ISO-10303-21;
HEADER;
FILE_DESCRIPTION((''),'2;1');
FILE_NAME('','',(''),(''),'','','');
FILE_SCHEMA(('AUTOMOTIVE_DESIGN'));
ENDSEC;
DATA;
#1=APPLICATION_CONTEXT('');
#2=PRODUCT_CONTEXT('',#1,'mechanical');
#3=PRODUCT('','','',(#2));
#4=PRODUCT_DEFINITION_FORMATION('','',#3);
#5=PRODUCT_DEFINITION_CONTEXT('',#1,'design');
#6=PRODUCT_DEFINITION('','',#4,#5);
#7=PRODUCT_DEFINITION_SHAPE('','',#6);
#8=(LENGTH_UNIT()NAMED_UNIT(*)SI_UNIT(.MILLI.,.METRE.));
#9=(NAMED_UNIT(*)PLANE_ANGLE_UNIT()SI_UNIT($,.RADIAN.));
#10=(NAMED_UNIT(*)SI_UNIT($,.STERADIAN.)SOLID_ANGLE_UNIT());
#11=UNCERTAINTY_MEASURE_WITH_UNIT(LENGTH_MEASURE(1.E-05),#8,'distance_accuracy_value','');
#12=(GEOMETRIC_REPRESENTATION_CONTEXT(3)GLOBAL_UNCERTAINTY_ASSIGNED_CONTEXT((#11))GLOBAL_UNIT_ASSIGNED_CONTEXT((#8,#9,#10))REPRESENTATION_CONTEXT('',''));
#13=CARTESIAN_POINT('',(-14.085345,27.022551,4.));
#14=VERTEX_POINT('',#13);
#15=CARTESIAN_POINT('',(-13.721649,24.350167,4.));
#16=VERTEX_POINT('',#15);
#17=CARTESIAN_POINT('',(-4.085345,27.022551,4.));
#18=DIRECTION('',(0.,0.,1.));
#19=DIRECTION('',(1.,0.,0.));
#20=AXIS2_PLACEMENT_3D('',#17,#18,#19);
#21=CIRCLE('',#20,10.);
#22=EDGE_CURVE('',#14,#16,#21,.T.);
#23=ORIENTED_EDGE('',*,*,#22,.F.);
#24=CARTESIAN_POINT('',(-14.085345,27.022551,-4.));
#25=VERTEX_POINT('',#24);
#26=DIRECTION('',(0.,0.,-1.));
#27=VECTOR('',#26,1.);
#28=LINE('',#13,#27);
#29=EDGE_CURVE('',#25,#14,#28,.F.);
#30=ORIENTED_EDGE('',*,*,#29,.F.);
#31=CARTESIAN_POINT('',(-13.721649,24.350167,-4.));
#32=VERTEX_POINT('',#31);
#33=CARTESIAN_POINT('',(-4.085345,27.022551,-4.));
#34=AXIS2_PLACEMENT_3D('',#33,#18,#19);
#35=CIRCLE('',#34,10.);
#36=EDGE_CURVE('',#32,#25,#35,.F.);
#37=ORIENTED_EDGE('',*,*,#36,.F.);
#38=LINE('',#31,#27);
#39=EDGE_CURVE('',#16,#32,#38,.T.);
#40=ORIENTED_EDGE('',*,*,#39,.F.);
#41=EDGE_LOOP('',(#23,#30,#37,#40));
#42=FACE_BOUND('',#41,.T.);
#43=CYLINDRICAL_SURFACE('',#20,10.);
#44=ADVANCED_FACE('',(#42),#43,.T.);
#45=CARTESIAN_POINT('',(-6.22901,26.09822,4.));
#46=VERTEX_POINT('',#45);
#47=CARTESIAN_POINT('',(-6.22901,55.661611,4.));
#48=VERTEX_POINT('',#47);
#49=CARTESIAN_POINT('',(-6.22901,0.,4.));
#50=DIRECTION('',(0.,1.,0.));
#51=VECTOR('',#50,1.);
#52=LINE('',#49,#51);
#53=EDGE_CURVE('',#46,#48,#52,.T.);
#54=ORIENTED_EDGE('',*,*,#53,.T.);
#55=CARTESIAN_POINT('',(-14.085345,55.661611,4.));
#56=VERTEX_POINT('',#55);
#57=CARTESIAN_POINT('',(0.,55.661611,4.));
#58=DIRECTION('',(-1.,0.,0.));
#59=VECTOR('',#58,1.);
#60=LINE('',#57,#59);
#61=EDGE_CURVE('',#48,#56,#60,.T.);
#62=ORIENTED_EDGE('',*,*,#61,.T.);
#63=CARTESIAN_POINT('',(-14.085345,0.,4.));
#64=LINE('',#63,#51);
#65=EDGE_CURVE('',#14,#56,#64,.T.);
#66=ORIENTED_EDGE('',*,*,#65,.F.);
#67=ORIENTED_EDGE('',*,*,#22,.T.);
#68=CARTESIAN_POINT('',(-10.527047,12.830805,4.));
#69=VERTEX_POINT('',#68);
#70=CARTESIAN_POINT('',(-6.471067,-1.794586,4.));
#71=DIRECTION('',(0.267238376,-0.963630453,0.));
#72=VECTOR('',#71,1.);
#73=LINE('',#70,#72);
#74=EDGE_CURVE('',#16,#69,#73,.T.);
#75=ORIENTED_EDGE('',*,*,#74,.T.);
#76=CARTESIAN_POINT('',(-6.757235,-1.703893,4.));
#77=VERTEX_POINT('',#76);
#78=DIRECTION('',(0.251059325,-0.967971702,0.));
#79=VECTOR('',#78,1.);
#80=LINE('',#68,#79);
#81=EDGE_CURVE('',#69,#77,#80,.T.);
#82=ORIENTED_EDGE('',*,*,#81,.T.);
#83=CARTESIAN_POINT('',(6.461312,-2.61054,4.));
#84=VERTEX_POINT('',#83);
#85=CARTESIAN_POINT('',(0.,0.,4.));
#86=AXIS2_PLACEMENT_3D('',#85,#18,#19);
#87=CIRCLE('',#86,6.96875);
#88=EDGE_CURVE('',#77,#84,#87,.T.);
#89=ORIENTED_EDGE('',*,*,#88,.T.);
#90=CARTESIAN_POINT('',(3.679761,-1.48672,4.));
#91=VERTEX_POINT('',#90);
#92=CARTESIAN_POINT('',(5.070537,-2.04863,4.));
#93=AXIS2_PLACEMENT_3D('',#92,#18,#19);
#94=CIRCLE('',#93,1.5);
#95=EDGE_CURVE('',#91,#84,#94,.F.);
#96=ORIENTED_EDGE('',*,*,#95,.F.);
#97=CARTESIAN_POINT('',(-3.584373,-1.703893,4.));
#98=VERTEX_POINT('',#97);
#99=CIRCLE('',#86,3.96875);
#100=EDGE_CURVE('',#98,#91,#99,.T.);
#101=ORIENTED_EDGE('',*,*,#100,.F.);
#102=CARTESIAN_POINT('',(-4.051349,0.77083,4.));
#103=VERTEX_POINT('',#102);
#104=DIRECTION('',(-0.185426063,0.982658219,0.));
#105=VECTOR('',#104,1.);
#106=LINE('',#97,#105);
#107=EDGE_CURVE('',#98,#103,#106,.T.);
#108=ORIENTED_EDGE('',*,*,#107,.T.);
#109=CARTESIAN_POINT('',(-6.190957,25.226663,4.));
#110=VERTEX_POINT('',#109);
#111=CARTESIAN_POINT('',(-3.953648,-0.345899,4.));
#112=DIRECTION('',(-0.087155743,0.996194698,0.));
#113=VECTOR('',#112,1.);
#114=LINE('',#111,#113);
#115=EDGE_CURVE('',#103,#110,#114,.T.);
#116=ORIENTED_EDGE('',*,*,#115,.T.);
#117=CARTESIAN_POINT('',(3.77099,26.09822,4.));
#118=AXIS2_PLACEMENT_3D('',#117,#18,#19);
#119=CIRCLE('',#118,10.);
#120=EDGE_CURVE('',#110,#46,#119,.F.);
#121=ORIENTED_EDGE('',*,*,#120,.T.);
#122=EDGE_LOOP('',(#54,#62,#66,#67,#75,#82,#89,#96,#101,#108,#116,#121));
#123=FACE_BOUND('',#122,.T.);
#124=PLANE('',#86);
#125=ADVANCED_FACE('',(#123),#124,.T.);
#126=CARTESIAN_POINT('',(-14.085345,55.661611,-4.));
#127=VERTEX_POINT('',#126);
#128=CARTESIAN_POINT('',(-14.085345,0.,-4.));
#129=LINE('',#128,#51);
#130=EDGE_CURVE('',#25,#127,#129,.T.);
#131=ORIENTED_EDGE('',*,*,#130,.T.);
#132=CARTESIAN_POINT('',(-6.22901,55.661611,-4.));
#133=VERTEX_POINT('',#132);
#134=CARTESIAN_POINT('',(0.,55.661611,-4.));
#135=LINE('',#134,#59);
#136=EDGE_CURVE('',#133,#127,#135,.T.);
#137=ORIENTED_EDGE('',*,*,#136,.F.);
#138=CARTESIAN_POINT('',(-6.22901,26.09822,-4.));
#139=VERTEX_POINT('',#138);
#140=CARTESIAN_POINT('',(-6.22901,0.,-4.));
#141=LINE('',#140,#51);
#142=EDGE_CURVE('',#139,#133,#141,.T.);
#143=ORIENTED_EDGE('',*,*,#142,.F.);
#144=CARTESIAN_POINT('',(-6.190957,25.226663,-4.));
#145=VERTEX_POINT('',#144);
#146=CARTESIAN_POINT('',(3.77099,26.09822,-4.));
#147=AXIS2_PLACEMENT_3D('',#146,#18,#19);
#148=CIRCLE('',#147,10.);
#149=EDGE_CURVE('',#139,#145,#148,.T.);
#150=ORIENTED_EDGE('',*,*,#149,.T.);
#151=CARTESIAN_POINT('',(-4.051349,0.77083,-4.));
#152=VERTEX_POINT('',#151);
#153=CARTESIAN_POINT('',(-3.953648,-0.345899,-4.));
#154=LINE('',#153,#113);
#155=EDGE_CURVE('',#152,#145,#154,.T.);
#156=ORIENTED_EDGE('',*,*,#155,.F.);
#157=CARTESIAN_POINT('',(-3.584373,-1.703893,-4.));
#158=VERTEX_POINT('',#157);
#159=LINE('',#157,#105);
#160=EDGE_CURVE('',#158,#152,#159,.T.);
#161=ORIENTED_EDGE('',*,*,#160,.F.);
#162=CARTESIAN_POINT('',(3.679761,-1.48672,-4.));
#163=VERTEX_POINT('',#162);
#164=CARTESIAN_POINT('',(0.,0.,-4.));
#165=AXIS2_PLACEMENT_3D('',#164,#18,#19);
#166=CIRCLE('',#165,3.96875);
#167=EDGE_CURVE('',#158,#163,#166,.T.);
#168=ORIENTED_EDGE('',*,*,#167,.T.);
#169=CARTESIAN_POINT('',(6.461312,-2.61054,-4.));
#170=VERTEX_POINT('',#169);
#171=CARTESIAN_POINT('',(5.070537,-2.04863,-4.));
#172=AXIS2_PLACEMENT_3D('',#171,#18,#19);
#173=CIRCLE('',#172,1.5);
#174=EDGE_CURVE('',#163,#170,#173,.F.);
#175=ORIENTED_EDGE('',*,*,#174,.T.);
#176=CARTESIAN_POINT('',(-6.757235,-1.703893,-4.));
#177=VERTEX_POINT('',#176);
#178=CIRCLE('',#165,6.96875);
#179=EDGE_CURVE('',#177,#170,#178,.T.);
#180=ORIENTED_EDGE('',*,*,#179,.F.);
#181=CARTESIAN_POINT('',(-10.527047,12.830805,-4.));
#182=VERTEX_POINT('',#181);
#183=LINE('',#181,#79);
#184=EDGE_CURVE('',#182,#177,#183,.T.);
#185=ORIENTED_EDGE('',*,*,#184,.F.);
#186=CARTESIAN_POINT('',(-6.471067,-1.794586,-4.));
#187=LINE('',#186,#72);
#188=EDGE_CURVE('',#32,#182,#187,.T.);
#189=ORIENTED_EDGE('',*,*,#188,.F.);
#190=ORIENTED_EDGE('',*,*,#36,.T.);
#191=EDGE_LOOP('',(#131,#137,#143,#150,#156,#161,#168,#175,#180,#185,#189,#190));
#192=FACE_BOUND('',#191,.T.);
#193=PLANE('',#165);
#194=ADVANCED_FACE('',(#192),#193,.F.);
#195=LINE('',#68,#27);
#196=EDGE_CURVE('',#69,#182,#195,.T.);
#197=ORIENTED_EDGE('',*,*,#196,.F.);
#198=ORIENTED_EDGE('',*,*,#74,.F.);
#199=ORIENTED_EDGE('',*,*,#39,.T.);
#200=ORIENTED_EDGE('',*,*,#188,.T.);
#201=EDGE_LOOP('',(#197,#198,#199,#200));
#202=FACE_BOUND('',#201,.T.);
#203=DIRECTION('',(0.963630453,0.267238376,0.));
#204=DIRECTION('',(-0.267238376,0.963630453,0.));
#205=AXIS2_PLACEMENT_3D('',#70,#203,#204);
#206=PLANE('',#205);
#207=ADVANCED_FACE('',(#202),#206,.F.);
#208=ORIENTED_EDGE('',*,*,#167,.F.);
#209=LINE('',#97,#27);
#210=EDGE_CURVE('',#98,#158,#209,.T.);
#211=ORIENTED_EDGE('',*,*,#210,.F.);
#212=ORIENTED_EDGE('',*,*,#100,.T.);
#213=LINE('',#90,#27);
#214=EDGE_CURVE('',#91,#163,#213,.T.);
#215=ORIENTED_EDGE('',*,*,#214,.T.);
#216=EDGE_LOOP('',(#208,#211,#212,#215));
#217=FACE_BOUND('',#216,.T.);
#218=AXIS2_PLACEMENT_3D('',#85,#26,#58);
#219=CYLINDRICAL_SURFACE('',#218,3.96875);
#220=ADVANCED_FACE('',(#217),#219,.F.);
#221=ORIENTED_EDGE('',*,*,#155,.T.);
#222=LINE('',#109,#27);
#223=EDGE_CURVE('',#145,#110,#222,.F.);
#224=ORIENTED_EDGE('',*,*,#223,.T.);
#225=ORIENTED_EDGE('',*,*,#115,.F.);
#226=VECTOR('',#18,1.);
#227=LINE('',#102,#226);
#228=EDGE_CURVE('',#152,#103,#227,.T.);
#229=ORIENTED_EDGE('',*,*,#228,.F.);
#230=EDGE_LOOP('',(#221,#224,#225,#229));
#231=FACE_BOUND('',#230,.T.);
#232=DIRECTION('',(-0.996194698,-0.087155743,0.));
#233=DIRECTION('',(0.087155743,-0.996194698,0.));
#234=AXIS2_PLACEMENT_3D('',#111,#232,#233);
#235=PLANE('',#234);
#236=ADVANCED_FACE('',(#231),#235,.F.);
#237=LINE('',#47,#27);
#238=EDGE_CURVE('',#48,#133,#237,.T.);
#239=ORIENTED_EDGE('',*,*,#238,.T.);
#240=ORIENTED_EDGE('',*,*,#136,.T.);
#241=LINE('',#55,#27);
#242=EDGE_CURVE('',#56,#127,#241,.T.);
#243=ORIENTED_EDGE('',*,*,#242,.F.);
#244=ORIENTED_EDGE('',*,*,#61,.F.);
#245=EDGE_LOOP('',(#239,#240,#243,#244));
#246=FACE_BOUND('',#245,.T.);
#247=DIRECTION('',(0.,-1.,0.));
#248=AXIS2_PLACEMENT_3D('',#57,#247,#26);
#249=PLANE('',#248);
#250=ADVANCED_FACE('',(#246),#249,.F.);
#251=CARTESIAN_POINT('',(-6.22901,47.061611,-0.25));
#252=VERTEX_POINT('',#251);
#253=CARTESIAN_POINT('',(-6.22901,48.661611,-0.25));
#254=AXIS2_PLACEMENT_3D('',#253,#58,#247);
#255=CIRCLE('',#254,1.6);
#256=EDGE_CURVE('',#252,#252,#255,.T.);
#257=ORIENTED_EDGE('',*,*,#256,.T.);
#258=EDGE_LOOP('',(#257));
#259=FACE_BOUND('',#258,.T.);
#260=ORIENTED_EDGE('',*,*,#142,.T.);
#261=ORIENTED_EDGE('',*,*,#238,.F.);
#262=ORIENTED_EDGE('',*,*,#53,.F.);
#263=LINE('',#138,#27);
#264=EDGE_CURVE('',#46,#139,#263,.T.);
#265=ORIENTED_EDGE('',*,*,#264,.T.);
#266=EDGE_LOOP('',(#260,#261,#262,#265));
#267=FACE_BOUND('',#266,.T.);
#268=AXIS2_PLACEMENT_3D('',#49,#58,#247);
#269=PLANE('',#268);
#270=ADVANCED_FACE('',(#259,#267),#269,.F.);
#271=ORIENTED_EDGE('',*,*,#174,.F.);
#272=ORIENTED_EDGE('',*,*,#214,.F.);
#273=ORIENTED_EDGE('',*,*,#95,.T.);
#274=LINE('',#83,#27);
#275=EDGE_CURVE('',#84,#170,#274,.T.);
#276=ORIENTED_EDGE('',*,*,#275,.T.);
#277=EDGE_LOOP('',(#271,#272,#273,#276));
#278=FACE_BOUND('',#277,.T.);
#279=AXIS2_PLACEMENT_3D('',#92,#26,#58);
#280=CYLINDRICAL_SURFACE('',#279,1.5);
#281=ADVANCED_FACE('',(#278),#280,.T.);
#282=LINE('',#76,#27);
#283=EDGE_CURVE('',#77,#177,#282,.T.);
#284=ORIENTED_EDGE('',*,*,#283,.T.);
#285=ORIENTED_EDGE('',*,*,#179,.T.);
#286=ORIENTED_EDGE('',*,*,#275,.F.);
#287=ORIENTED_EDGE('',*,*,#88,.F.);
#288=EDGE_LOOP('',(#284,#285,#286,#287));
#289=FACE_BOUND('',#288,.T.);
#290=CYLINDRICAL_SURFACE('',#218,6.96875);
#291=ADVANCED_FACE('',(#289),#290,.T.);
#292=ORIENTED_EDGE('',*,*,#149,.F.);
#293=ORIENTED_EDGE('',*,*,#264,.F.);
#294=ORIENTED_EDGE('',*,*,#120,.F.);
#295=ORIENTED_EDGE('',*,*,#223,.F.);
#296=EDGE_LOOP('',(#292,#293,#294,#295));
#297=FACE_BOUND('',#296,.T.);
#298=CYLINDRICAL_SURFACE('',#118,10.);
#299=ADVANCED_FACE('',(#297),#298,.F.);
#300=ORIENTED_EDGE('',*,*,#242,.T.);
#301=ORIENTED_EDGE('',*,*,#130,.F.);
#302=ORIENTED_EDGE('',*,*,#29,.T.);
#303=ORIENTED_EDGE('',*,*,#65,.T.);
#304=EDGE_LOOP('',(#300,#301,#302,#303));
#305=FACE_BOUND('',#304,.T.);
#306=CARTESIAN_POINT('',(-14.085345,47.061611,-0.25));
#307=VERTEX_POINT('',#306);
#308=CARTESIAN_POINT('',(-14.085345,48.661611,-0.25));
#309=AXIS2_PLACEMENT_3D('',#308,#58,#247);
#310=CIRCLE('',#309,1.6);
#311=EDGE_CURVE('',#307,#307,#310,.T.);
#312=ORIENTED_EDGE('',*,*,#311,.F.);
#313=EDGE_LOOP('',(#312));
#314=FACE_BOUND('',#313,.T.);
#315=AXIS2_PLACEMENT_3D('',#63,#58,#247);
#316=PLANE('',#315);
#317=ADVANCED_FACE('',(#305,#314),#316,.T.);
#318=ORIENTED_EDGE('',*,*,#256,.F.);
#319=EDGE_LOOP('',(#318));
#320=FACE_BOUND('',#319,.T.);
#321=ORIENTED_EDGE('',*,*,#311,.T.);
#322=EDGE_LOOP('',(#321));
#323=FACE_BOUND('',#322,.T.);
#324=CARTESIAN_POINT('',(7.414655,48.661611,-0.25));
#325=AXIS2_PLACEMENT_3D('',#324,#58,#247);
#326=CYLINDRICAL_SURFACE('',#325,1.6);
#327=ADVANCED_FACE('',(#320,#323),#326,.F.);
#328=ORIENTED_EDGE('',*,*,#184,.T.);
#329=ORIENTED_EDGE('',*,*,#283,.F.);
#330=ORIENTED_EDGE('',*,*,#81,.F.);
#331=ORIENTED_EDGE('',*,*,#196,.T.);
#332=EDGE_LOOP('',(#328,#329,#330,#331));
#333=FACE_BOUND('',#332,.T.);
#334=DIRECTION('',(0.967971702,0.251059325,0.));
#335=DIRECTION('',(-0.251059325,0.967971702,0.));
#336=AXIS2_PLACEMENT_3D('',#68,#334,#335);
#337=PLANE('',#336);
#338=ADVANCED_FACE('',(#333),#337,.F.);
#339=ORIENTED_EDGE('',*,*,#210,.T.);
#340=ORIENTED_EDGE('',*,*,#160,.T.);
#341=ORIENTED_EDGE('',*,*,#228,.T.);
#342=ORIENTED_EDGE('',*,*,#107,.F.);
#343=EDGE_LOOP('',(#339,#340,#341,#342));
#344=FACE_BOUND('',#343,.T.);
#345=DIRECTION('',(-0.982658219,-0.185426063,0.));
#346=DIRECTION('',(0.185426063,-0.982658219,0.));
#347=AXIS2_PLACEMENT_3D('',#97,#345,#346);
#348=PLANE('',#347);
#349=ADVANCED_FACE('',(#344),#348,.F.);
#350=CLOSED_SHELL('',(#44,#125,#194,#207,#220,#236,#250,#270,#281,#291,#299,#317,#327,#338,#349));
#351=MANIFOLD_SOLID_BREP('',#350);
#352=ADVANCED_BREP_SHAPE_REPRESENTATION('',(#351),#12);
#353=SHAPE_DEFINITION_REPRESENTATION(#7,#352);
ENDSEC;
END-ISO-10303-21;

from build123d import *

# Parameters (mm, degrees)
SALIENTE_EXTRUIR2_DEPTH = 4
SALIENTE_EXTRUIR3_DEPTH = 4
REDONDEO1_R             = 10
REDONDEO2_R             = 10
CROQUIS4_R              = 1.6
CORTAR_EXTRUIR1_DEPTH   = 21.5


with BuildPart() as part:
    # Croquis2 → Saliente-Extruir2 (new, symmetric)
    with BuildSketch(Plane.XY):
        with BuildLine():
            ThreePointArc((3.679760923, -1.486719918), (-0.5866186, -3.925156708), (-3.953647708, -0.345899354))
            Line((-3.953647708, -0.345899354), (-6.229010011, 25.661610777))
            Line((-6.229010011, 25.661610777), (-6.229010011, 55.661610777))
            Line((-6.229010011, 55.661610777), (-14.085344509, 55.661610777))
            Line((-14.085344509, 55.661610777), (-14.085344509, 25.661610777))
            Line((-14.085344509, 25.661610777), (-6.96875, 0))
            ThreePointArc((-6.96875, 0), (-1.329700187, -6.840714435), (6.461312487, -2.610539698))
            ThreePointArc((6.461312487, -2.610539698), (5.632446595, -0.657854026), (3.679760923, -1.486719918))
        make_face()
    extrude(amount=SALIENTE_EXTRUIR2_DEPTH, both=True)

    # Croquis3 → Saliente-Extruir3 (add, symmetric)
    with BuildSketch(Plane.XY):
        Polygon((-10.527047254, 12.830805389), (-6.757235143, -1.70389254), (-3.584372578, -1.70389254), (-6.327047254, 12.830805389), align=None)
    extrude(amount=SALIENTE_EXTRUIR3_DEPTH, both=True)

    # Redondeo1
    redondeo1_edges = [part.edges().sort_by_distance(p)[0] for p in [
        (-14.085344509, 25.661610777, 0),
    ]]
    fillet(redondeo1_edges, radius=REDONDEO1_R)

    # Redondeo2
    # the kernel refuses this fillet: 10 mm, written as the material it adds along each edge
    with BuildSketch(Plane(origin=(-6.229010011, 25.661610777, -4), x_dir=(0, 1, 0), z_dir=(0, 0, 1))) as redondeo2_piece_1:
        with BuildLine():
            CenterArc((REDONDEO2_R * 0.0436609429085, -REDONDEO2_R), REDONDEO2_R, 90, 5)
            Line((-REDONDEO2_R * 0.0434947998391, -REDONDEO2_R * 0.00380530190825), (0, 0))
            Line((0, 0), (REDONDEO2_R * 0.0436609429085, 0))
        make_face()
    extrude(amount=8)

    # Croquis4 → Cortar-Extruir1 (cut)
    with BuildSketch(Plane.ZY.offset(14.085344509)):
        with Locations(Location((-0.25, 48.661610777, 0), (0, 0, 270))):
            Circle(CROQUIS4_R)
    extrude(amount=-CORTAR_EXTRUIR1_DEPTH, mode=Mode.SUBTRACT)


solid = part.part
